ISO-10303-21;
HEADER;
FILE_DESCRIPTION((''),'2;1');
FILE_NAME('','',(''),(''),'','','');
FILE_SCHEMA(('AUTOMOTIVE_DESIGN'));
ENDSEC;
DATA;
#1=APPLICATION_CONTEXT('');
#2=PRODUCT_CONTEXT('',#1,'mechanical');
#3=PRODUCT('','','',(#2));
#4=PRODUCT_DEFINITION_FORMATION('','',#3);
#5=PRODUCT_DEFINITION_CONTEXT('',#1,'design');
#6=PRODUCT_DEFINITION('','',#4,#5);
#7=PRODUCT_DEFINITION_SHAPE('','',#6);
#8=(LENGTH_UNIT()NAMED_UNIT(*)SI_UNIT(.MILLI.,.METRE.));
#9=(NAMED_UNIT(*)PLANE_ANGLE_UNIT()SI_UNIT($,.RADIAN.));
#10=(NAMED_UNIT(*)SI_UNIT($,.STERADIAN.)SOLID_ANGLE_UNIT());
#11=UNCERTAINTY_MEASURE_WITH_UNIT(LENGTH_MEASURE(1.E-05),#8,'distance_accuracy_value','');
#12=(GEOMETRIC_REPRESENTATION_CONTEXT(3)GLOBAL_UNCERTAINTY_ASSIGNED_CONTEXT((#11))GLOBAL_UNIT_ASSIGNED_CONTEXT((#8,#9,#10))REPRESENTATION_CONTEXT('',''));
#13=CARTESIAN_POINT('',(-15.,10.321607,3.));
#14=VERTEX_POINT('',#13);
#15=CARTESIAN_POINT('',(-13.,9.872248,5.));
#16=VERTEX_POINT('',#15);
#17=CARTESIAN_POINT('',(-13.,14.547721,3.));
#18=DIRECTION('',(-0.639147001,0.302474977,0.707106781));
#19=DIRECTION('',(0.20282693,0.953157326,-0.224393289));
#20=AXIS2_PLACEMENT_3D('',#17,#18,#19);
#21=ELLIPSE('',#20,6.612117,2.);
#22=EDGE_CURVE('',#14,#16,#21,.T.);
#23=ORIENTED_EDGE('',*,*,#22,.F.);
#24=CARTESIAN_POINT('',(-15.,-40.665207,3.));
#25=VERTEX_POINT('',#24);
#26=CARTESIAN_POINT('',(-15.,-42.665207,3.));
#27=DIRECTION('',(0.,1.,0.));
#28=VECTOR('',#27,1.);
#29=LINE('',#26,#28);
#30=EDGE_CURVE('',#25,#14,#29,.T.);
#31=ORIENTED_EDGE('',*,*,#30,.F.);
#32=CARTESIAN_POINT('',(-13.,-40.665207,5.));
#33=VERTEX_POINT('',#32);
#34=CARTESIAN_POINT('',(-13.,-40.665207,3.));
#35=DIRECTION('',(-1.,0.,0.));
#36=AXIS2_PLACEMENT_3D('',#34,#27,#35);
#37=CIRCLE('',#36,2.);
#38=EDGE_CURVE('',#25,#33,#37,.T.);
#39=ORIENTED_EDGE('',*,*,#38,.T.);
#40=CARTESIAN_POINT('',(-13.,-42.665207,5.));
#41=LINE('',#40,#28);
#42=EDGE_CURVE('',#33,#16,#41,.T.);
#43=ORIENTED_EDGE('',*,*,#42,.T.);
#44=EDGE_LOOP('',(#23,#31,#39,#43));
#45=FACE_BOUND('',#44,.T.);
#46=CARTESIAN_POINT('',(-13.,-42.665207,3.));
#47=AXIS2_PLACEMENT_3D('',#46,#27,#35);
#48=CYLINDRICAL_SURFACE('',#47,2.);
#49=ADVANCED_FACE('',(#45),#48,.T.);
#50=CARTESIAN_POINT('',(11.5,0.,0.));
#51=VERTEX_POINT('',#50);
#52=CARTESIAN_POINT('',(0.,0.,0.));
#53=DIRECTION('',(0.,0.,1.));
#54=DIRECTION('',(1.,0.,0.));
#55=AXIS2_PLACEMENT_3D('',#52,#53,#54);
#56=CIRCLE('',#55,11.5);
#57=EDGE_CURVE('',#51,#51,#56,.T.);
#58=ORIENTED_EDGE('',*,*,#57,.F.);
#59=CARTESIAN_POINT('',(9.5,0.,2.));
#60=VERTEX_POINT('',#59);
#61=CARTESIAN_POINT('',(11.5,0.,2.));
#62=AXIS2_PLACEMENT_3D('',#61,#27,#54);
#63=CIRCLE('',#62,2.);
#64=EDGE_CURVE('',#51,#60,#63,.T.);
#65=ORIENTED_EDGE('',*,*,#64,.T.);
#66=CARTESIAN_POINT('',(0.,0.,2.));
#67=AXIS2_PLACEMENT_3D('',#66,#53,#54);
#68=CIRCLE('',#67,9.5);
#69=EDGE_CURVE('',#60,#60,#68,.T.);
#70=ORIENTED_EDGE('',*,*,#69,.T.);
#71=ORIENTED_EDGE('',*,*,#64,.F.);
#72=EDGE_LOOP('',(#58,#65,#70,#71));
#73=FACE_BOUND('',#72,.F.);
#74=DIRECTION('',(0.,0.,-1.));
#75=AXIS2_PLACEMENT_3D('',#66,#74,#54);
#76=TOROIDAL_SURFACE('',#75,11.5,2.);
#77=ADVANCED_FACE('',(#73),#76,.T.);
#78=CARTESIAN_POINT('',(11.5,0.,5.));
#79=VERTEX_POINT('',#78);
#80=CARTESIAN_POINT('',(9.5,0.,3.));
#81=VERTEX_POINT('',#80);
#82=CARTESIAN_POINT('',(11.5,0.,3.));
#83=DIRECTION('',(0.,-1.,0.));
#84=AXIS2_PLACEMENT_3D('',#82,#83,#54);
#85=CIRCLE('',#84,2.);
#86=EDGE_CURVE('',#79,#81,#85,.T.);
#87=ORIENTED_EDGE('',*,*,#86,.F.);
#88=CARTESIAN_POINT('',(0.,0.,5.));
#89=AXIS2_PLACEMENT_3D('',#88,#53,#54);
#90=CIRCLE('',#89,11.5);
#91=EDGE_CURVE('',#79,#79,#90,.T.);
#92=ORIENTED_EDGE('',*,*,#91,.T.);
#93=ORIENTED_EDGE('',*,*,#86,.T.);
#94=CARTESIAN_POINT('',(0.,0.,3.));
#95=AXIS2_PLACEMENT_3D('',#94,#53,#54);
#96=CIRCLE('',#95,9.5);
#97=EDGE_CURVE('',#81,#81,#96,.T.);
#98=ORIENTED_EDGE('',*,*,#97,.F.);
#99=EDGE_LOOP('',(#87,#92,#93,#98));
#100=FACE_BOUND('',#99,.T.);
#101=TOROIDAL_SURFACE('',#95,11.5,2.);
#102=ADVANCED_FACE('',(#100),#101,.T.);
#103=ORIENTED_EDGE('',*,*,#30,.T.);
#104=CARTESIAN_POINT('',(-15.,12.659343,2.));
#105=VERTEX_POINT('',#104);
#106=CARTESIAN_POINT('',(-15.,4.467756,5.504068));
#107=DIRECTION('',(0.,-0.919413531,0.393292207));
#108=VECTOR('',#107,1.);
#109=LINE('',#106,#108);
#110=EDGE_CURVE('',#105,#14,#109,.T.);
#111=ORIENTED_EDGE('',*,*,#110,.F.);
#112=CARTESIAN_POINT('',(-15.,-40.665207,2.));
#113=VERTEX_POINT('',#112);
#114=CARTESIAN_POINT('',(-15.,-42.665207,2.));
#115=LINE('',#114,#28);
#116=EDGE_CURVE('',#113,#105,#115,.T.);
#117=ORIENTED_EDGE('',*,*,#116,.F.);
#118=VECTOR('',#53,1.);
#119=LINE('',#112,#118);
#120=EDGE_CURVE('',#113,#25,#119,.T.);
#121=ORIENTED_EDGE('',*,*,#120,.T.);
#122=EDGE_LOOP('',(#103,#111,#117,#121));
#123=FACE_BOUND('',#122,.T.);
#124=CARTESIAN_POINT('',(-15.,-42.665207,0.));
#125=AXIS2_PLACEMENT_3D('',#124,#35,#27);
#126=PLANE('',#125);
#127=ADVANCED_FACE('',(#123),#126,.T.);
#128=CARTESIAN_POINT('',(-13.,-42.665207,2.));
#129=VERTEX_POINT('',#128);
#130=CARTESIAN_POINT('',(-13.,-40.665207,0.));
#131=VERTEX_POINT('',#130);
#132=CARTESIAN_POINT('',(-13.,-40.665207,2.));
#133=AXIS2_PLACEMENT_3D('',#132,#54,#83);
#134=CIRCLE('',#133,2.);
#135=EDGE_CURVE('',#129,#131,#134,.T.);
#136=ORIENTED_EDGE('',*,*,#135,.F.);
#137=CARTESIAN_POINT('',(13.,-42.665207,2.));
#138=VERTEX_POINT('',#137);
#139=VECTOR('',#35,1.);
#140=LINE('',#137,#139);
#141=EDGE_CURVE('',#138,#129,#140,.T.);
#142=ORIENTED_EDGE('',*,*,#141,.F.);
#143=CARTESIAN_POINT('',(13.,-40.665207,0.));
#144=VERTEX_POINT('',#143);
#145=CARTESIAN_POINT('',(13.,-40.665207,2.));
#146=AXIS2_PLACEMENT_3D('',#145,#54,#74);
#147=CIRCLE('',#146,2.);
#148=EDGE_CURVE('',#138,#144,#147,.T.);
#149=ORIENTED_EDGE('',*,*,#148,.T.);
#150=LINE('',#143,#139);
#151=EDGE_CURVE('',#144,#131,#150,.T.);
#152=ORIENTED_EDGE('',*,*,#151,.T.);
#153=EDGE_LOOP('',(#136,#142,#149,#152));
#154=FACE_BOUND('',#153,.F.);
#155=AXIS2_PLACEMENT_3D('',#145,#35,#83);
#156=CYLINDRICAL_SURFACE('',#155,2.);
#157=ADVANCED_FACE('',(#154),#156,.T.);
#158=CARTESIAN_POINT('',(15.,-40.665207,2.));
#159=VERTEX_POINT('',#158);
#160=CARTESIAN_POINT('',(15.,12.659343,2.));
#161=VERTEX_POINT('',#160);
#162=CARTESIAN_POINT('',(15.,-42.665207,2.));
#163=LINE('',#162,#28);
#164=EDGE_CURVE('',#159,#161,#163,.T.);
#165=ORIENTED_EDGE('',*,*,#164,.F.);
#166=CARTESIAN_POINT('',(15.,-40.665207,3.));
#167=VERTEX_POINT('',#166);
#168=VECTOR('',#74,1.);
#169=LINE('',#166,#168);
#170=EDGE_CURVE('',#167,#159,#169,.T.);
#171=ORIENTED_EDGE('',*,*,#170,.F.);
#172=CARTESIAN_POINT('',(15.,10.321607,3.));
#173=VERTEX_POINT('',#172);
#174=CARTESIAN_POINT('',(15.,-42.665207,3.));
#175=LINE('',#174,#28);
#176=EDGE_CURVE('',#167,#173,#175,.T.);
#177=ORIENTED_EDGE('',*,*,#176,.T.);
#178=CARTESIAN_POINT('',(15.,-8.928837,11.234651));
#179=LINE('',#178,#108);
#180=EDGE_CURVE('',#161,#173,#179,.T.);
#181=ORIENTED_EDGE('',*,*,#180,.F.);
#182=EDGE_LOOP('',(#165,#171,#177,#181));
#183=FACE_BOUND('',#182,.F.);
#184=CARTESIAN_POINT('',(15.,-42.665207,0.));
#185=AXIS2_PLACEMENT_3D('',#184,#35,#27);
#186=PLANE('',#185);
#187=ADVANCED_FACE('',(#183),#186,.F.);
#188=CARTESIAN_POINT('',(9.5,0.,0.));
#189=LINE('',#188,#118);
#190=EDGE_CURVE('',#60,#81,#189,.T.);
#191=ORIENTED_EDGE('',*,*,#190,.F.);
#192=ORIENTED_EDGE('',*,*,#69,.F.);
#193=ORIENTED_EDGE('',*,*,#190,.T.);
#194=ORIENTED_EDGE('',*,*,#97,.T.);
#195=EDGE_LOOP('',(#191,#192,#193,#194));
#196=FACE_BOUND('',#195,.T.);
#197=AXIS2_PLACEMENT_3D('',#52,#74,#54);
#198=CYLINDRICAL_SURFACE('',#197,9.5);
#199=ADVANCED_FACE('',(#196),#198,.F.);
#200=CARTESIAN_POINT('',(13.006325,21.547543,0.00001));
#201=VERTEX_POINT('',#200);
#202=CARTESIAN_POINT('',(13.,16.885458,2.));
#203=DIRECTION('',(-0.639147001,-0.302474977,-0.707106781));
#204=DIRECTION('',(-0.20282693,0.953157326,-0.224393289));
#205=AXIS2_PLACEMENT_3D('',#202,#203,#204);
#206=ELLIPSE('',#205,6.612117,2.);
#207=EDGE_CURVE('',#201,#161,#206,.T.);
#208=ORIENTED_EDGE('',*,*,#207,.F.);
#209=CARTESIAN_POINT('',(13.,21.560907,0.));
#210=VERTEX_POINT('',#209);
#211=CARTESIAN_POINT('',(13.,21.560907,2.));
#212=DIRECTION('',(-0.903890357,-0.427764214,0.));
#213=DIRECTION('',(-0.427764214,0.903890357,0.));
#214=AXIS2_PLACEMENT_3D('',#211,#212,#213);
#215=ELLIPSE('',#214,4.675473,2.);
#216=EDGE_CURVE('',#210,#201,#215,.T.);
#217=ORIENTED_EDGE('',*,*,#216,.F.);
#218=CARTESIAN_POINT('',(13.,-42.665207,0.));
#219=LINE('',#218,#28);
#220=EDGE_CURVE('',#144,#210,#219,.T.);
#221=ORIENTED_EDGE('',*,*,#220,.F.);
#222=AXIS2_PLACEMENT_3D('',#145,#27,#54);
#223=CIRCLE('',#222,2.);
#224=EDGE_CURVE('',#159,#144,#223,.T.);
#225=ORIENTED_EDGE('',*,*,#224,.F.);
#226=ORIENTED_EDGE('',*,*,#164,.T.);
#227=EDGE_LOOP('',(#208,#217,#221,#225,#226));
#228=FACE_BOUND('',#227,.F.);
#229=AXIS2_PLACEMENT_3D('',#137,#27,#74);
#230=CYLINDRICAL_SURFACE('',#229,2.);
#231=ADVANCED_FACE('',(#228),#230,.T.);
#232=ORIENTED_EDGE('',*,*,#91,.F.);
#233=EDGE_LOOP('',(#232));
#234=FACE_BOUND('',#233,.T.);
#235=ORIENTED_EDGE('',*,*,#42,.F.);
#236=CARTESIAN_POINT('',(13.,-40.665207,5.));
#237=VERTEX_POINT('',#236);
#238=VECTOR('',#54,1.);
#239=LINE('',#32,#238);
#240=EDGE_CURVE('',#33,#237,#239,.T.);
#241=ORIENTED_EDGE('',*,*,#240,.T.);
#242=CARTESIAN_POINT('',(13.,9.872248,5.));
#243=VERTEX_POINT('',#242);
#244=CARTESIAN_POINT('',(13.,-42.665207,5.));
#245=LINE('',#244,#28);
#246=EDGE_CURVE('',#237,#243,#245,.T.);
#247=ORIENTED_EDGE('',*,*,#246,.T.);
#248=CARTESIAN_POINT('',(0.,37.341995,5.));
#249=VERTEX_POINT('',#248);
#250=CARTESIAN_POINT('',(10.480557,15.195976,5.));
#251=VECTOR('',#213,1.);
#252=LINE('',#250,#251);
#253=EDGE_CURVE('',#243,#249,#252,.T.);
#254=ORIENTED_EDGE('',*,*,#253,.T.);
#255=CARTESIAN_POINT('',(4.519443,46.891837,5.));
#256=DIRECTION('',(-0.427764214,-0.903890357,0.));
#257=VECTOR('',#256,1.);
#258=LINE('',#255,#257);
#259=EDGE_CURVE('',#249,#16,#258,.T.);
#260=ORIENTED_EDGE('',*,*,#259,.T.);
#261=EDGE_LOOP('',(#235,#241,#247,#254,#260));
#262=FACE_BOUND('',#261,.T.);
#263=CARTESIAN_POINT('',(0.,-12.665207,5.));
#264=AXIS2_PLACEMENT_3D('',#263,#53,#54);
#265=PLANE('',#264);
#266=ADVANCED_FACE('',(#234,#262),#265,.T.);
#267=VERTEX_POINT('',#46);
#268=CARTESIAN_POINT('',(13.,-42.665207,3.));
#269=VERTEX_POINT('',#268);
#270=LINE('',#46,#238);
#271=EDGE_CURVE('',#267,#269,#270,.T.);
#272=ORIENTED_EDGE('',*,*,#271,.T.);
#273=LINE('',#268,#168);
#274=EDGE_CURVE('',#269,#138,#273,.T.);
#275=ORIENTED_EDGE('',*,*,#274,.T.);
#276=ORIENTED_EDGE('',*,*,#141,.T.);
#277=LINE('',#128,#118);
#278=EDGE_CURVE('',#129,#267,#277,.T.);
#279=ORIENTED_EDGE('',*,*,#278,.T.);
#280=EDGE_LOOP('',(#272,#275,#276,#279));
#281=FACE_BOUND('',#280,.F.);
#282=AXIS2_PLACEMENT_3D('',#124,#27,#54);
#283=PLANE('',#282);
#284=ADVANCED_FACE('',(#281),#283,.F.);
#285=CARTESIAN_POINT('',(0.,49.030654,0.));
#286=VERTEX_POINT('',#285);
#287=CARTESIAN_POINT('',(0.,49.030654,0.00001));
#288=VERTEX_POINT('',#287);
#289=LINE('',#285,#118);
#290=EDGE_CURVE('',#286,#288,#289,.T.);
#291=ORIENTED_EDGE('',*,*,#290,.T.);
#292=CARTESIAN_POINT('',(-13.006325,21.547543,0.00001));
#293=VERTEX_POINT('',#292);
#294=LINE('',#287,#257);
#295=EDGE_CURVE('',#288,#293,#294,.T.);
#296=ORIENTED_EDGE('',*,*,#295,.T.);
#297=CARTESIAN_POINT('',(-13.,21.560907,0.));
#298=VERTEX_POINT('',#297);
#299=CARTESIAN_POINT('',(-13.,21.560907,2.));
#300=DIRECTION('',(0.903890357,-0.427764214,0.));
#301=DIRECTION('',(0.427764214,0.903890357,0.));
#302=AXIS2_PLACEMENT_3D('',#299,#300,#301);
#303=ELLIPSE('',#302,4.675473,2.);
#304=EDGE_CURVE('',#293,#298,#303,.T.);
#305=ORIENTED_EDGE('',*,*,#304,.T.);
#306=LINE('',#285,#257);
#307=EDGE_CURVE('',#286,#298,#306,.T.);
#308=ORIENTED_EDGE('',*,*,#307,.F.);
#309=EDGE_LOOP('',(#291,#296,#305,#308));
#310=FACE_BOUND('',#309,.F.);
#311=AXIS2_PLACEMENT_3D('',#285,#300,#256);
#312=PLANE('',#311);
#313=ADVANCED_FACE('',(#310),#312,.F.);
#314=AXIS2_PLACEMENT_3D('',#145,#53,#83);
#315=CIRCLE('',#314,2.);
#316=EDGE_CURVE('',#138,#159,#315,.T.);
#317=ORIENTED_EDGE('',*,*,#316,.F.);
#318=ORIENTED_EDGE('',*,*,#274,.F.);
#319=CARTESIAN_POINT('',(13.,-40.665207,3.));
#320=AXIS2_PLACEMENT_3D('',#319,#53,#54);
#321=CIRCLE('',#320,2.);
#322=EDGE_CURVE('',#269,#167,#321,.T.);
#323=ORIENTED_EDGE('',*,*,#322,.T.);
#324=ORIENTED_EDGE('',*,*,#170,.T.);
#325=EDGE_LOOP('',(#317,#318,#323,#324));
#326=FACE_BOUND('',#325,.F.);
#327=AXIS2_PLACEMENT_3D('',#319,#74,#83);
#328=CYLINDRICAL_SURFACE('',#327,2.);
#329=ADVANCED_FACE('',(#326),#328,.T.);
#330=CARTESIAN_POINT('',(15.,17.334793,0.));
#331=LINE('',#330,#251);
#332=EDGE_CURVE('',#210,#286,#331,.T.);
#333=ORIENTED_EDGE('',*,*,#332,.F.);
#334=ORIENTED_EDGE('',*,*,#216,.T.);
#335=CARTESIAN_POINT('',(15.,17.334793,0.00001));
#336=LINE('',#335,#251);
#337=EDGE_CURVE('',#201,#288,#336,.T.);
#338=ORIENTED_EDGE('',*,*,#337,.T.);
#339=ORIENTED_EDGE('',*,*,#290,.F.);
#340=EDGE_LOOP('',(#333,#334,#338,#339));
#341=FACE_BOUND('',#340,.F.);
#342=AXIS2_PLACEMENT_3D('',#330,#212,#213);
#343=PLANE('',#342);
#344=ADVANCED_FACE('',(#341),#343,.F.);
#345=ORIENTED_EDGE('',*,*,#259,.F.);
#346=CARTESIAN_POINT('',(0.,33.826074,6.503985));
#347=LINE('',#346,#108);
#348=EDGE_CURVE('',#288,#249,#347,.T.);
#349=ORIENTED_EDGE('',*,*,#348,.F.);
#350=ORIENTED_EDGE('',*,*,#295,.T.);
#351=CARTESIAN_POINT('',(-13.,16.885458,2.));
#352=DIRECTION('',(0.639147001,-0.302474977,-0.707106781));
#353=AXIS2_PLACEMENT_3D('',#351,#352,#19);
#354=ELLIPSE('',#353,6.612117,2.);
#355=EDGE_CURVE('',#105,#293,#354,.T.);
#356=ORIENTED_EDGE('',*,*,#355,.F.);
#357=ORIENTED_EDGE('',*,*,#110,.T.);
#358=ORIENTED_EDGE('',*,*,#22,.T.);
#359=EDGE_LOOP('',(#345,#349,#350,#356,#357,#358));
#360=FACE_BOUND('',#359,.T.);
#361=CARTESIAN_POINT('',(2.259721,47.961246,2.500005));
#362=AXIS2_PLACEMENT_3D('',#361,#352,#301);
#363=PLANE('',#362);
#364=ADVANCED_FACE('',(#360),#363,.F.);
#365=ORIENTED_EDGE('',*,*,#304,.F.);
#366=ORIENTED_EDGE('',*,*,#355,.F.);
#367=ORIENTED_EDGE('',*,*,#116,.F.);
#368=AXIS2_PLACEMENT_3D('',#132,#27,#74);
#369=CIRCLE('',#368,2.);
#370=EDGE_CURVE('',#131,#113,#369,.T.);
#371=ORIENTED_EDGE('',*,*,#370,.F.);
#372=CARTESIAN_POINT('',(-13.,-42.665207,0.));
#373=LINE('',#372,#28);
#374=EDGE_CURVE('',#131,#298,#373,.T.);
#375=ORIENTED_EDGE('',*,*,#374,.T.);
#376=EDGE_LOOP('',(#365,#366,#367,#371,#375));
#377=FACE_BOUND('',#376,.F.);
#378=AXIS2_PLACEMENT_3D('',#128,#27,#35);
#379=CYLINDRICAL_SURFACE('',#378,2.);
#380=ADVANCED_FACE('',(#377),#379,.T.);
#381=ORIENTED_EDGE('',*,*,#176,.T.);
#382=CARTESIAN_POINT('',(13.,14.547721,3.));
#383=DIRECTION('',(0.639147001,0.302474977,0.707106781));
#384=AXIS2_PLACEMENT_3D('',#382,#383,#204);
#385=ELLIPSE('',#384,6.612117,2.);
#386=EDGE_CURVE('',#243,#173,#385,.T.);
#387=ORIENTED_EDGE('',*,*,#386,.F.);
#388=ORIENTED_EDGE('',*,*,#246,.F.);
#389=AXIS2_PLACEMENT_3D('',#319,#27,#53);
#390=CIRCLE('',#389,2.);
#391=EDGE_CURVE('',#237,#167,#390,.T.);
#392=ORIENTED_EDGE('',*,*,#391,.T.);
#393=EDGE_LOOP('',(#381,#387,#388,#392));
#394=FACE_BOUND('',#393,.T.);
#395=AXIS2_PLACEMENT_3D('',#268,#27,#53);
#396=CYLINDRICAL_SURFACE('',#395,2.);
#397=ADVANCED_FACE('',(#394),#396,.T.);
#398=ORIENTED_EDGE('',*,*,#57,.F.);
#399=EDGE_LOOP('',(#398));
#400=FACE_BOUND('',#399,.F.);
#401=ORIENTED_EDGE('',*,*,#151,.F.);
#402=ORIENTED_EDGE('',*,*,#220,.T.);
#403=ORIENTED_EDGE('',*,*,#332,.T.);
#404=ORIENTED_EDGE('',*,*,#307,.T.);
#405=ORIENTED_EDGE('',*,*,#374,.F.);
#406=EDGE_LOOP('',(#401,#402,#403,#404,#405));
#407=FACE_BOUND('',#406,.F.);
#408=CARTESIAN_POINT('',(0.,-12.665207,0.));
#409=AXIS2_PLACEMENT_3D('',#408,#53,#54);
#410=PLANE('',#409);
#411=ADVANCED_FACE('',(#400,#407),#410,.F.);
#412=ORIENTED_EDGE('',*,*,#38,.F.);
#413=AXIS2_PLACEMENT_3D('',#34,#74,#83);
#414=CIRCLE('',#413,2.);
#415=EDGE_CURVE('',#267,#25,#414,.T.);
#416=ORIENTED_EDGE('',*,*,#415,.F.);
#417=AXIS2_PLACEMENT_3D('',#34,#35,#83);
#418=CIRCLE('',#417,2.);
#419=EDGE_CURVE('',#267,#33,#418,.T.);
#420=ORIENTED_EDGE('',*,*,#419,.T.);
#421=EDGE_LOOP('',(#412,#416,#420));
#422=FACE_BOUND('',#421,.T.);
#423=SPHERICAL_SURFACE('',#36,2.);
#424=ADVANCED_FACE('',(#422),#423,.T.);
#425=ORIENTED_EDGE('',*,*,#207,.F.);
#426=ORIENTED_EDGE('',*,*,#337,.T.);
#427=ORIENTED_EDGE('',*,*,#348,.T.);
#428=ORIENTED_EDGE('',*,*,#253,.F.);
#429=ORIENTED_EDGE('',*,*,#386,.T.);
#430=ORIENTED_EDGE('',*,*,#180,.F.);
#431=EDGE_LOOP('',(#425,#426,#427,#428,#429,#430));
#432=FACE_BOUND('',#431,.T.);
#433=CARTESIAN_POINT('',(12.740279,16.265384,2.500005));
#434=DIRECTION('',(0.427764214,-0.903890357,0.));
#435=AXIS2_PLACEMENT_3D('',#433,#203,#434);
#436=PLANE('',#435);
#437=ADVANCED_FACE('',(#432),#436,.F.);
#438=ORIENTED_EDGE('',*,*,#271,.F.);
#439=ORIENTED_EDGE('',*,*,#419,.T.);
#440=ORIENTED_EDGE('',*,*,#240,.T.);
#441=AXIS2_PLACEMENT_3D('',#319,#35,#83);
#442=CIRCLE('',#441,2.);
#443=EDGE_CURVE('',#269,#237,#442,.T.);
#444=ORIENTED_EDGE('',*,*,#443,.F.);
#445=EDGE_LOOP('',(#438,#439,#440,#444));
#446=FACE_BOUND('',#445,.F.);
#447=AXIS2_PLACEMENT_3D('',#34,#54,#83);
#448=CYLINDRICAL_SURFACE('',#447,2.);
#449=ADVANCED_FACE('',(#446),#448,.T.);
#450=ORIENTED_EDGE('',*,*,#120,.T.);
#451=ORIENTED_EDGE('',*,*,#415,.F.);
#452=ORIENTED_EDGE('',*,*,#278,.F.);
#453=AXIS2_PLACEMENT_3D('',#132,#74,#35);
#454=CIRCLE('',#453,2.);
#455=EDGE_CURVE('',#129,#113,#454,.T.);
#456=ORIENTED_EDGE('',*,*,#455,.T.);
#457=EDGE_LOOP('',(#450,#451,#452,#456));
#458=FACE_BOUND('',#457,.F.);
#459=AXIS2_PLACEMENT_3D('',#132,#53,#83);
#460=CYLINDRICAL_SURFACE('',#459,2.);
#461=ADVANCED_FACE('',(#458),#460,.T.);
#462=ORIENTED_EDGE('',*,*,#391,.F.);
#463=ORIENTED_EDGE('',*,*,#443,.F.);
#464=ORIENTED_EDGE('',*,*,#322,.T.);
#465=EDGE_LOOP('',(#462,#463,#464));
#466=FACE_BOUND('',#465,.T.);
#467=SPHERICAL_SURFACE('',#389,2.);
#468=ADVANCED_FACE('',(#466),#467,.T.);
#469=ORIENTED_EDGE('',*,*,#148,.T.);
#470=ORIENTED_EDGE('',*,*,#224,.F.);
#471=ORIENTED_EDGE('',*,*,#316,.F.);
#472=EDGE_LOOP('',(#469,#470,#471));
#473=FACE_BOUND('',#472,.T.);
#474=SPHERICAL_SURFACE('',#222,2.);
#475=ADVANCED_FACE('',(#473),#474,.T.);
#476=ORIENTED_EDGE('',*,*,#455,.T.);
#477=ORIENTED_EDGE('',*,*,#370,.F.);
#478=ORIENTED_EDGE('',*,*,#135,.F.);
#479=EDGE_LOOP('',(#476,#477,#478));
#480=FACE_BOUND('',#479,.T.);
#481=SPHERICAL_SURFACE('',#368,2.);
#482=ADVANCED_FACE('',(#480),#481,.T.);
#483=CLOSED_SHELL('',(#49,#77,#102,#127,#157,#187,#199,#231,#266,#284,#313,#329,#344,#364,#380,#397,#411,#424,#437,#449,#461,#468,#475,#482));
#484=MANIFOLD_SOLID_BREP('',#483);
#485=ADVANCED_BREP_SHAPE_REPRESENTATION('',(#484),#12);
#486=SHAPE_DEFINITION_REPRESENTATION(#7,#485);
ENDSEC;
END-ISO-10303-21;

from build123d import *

# Parameters (mm, degrees)
F0_W     = 30
F0_H     = 60
F0_R     = 9.5
F1_DEPTH = 5
F2_SIZE  = 4.99999
F3_R     = 2
F4_R     = 2


# Not quite as in the source:
# - a fillet or chamfer is up to 0.001 mm smaller than in the source, because OpenCascade refuses the exact size


with BuildPart() as f1:
    # F0 (on Top) → F1 (new body)
    with BuildSketch(Plane.XY):
        with Locations((0, -12.6652074978)):
            Rectangle(F0_W, F0_H)
        Circle(F0_R, mode=Mode.SUBTRACT)
        Polygon((-15, 17.3347925022), (15, 17.3347925022), (0, 49.0306541324), align=None)
    extrude(amount=F1_DEPTH)

    # F2 (size 5 in the source; OpenCascade refuses exactly that, so slightly less here)
    f2_edges = [f1.edges().sort_by_distance(p)[0] for p in [
        (-7.5, 33.182723, 5),
        (7.5, 33.182723, 5),
    ]]
    chamfer(f2_edges, length=F2_SIZE)

    # F3
    f3_edges = [f1.edges().sort_by_distance(p)[0] for p in [
        (-15, -18.509537, 5),
        (15, -18.509537, 5),
        (15, -12.665207, 0),
        (-15, -12.665207, 0),
        (-9.5, 0, 5),
        (-9.5, 0, 0),
    ]]
    fillet(f3_edges, radius=F3_R)

    # F4
    f4_edges = [f1.edges().sort_by_distance(p)[0] for p in [
        (0, -42.665207, 5),
    ]]
    fillet(f4_edges, radius=F4_R)


solid = f1.part
